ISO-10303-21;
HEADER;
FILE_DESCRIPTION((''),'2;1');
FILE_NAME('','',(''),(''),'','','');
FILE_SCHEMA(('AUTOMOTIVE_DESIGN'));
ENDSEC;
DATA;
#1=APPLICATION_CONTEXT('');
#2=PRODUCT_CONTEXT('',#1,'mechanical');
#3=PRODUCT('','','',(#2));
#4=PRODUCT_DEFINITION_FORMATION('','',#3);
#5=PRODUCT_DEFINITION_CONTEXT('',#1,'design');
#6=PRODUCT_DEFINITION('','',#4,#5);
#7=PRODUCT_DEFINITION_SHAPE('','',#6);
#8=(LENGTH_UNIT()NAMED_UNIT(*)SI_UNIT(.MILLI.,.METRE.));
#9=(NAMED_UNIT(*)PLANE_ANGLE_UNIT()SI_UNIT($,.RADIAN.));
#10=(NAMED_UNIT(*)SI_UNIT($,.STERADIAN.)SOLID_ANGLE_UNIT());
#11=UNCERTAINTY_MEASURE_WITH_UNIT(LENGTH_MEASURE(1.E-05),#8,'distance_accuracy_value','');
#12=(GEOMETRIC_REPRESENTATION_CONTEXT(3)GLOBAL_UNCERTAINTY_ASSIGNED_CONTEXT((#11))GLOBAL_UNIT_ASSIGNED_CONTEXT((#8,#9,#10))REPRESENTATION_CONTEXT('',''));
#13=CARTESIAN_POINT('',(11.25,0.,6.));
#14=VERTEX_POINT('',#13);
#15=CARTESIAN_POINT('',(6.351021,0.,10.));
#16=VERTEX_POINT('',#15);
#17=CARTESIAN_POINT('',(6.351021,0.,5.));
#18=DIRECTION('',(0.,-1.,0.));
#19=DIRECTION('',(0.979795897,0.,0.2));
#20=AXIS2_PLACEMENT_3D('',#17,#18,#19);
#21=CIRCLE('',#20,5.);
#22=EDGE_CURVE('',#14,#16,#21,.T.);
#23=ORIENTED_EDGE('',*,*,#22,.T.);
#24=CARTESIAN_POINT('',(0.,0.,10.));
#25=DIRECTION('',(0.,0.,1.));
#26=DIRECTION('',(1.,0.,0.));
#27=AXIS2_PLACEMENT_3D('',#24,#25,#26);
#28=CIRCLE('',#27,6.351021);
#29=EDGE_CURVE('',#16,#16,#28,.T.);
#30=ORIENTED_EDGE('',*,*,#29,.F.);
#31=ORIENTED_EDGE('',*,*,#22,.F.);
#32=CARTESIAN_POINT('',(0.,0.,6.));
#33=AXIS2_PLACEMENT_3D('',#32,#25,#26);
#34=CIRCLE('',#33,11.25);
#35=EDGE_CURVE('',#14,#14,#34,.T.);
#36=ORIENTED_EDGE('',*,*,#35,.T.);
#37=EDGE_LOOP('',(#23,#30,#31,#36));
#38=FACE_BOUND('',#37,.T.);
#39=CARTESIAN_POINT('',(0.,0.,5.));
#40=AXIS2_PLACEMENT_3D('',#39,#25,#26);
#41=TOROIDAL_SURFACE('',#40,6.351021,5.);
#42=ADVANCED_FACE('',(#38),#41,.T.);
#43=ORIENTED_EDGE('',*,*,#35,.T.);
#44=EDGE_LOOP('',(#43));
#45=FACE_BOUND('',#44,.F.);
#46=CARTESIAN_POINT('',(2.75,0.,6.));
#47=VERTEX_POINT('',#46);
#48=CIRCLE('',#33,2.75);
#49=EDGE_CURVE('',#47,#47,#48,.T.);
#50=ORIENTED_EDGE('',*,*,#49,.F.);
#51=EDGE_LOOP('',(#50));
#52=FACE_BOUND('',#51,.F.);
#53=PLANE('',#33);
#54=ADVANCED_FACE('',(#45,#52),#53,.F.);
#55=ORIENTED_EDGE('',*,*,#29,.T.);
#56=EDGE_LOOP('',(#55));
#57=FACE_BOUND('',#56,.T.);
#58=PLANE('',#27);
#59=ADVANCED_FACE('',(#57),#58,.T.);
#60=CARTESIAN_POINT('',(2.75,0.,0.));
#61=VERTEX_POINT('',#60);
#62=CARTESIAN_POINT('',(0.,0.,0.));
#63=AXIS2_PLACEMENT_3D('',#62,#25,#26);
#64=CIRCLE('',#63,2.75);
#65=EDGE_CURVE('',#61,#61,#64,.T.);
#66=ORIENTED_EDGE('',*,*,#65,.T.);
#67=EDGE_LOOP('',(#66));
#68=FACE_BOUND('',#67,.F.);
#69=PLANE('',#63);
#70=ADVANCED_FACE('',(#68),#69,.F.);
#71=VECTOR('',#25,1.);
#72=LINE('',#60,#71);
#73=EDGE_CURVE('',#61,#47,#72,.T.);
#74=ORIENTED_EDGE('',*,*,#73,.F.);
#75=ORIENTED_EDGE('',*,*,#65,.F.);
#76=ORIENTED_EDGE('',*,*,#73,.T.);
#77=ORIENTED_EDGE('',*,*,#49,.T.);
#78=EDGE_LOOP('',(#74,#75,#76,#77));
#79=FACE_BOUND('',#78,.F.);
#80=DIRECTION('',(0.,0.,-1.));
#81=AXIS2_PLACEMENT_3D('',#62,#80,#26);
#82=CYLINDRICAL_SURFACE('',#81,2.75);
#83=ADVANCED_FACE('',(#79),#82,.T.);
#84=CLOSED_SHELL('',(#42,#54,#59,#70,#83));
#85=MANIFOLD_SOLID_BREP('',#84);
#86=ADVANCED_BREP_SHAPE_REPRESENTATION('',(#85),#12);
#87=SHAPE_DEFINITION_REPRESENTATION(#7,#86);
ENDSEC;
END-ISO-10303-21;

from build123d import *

# Parameters (mm, degrees)
F0_R     = 2.75
F1_DEPTH = 6
F2_R     = 11.25
F3_DEPTH = 4


# Not quite as in the source:
# - a fillet or chamfer that OpenCascade refuses, or shapes differently, is made with other operations: its cross-section is extruded or revolved along the edge and cut away or added


with BuildPart() as f1:
    # F0 (on Top) → F1 (new body)
    with BuildSketch(Plane.XY):
        Circle(F0_R)
    extrude(amount=F1_DEPTH)

    # F2 (on face) → F3 (join)
    with BuildSketch(Plane.XY.offset(6)):
        Circle(F2_R)
    extrude(amount=F3_DEPTH)

    # F4: fillet of radius 5 on 1 edges, made by hand

    # F4_s1 → F4_t2 (revolve, cut)
    with BuildSketch(Plane.XZ):
        with BuildLine():
            ThreePointArc((11.25, 6), (9.5132981746, 8.8729833462), (6.3510205144, 10))
            Line((6.3510205144, 10), (11.25, 10))
            Line((11.25, 10), (11.25, 6))
        make_face()
    revolve(axis=Axis((0, 0, 10), (0, 0, 1)), mode=Mode.SUBTRACT)


solid = f1.part
